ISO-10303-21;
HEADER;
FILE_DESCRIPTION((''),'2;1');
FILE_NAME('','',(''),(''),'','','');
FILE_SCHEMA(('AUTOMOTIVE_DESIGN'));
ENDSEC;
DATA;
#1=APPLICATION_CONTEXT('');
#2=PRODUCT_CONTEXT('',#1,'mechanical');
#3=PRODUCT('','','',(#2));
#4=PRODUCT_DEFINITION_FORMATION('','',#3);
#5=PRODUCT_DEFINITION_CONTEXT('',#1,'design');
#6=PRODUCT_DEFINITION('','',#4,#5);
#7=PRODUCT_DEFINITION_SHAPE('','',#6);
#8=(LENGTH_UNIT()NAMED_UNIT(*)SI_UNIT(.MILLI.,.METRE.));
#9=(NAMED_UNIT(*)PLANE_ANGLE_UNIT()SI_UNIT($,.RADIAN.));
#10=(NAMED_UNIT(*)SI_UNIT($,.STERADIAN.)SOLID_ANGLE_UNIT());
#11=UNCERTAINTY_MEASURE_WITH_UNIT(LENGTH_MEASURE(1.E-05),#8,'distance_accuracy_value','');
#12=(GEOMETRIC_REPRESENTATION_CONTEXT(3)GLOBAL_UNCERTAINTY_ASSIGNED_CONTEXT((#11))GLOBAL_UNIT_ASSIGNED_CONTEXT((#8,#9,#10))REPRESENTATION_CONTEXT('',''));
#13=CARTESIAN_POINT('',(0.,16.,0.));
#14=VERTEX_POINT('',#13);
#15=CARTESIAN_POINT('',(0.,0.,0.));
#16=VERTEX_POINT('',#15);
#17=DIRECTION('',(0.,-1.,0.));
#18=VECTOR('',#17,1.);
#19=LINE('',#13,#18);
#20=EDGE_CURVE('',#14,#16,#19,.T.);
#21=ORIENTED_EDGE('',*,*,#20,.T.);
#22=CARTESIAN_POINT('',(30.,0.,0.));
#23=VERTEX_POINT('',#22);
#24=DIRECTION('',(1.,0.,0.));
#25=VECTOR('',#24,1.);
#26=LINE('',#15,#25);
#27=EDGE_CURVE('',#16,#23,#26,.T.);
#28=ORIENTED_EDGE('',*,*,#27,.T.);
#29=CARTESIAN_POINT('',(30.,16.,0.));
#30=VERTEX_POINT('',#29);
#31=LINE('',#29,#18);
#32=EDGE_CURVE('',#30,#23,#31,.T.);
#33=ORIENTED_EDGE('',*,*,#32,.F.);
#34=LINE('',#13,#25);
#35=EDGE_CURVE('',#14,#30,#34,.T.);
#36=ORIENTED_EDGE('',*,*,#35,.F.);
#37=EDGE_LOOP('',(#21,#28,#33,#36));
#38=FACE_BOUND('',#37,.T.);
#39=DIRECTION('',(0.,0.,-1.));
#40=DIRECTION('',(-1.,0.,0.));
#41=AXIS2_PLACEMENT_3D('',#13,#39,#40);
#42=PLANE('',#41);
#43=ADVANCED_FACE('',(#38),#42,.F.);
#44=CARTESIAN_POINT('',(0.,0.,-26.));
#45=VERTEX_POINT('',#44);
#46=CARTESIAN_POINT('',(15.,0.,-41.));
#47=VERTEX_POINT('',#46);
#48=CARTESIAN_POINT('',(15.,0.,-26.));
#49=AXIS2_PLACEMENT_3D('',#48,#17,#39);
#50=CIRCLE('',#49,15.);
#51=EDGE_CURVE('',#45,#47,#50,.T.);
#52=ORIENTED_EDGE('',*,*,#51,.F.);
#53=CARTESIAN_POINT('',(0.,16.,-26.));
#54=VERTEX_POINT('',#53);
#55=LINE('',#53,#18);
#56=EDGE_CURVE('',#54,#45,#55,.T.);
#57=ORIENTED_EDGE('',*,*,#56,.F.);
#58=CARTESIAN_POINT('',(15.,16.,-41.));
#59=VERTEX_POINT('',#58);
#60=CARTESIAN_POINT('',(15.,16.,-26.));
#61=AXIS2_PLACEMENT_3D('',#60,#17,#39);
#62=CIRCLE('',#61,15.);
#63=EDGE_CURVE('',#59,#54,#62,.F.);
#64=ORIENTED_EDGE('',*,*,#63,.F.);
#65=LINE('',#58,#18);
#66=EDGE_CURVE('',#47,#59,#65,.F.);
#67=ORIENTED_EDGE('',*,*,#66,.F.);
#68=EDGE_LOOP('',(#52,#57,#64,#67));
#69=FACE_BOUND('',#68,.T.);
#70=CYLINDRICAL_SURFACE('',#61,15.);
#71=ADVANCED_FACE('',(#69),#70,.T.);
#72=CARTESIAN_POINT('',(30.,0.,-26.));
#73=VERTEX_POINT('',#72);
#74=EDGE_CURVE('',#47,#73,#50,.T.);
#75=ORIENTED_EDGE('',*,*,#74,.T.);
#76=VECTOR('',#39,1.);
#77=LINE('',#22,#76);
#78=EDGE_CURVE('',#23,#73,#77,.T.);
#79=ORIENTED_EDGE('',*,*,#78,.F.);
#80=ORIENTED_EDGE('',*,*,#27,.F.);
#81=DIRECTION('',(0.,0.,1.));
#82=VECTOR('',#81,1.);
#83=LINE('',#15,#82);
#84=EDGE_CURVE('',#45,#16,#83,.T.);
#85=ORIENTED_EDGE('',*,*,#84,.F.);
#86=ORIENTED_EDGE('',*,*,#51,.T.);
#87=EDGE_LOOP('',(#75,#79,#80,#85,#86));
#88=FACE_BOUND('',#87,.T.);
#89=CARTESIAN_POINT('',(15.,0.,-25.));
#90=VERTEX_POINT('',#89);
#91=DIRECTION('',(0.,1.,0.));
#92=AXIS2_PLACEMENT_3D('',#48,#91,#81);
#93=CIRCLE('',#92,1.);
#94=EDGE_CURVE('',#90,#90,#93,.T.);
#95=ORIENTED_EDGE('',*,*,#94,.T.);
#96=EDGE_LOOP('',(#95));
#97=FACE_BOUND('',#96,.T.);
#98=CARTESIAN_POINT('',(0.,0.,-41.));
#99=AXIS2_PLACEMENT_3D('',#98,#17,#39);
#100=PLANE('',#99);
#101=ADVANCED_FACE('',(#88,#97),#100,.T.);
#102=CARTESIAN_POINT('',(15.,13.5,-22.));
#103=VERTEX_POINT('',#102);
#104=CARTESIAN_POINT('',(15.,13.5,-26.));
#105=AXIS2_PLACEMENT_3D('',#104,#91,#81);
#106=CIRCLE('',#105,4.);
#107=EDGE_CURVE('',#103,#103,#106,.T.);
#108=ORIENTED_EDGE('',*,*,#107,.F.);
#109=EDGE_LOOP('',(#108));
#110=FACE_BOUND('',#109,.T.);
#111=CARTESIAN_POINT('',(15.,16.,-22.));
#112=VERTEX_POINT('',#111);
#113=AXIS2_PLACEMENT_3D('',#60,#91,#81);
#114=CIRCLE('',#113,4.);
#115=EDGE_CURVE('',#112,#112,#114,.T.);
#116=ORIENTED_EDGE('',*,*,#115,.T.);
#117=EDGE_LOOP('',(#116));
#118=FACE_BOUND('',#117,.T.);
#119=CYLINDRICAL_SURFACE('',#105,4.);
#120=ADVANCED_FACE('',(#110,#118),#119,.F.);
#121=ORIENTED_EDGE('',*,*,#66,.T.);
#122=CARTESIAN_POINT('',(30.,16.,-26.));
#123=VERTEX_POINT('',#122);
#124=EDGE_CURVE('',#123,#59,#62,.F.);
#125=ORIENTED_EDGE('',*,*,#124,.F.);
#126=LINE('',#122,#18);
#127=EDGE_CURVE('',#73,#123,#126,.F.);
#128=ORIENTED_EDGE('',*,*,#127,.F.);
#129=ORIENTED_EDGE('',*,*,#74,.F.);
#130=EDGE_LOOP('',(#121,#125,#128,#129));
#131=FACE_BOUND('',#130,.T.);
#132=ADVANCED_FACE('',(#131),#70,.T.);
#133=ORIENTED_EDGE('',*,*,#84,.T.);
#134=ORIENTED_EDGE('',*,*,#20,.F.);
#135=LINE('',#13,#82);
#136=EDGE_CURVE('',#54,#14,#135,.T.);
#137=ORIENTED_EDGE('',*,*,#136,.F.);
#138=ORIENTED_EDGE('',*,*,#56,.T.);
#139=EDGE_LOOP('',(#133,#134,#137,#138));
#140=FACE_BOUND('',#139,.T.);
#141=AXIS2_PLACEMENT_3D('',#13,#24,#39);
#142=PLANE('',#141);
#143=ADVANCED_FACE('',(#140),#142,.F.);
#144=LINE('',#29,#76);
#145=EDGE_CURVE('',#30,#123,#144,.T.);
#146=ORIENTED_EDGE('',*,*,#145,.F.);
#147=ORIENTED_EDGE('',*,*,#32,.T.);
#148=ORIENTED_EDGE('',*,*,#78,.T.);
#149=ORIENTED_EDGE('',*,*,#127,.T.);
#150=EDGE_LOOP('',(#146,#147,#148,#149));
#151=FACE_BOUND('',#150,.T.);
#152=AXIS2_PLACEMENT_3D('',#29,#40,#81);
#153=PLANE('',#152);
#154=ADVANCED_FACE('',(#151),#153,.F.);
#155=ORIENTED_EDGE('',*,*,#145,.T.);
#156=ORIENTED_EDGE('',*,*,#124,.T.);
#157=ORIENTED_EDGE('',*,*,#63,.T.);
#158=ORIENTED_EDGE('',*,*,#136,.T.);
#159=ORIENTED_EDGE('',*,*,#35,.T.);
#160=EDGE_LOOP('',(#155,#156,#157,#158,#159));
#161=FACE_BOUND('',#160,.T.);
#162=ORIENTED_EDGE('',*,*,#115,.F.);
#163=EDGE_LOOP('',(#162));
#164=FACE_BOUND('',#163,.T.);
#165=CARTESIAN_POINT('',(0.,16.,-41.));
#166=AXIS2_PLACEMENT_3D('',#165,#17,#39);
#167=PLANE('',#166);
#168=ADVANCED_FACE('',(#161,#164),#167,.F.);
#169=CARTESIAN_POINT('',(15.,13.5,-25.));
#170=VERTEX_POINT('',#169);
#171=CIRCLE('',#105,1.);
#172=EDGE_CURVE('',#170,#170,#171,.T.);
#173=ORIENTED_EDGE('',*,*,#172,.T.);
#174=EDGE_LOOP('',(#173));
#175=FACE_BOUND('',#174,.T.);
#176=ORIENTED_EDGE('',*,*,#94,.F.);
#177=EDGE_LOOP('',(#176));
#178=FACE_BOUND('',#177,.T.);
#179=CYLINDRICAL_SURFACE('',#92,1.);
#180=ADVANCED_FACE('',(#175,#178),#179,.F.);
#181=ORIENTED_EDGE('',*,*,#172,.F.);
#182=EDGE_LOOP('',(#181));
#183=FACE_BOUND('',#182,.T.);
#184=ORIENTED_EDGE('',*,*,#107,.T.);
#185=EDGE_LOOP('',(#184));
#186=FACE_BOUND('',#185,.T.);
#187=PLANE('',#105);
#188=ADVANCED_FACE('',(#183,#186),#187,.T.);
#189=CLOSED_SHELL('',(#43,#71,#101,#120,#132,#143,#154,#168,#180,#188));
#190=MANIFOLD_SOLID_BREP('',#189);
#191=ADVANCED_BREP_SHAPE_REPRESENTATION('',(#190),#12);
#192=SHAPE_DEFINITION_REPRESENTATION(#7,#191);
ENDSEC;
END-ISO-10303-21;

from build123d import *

# Parameters (mm, degrees)
ESQUISSE1_W             = 30
ESQUISSE1_H             = 41
EXTRUSION1_DEPTH        = 16
CONG_1_R                = 15
ESQUISSE3_R             = 4
ENL_V_MAT_EXTRU_1_DEPTH = 2.5
ESQUISSE4_R             = 1
ENL_V_MAT_EXTRU_2_DEPTH = 53.566624392


with BuildPart() as part:
    # Esquisse1 → Extrusion1 (new body)
    with BuildSketch(Plane(origin=(0, 0, 0), x_dir=(1, 0, 0), z_dir=(0, 1, 0))):
        with Locations((15, 20.5)):
            Rectangle(ESQUISSE1_W, ESQUISSE1_H)
    extrude(amount=EXTRUSION1_DEPTH)

    # Congé1
    cong_1_edges = [part.edges().sort_by_distance(p)[0] for p in [
        (30, 8, -41),
        (0, 8, -41),
    ]]
    fillet(cong_1_edges, radius=CONG_1_R - 0.0001)  # a hair under: the kernel refuses the full size

    # Esquisse3 → Enlèv. mat.-Extru.1 (cut)
    with BuildSketch(Plane(origin=(0, 16, 0), x_dir=(1, 0, 0), z_dir=(0, 1, 0))):
        with Locations(Location((15, 26, 0), (0, 0, 270))):
            Circle(ESQUISSE3_R)
    extrude(amount=-ENL_V_MAT_EXTRU_1_DEPTH, mode=Mode.SUBTRACT)

    # Esquisse4 → Enlèv. mat.-Extru.2 (cut, through all)
    with BuildSketch(Plane(origin=(0, 13.5, 0), x_dir=(1, 0, 0), z_dir=(0, 1, 0))):
        with Locations(Location((15, 26, 0), (0, 0, 270))):
            Circle(ESQUISSE4_R)
    extrude(amount=-ENL_V_MAT_EXTRU_2_DEPTH, mode=Mode.SUBTRACT)


solid = part.part
